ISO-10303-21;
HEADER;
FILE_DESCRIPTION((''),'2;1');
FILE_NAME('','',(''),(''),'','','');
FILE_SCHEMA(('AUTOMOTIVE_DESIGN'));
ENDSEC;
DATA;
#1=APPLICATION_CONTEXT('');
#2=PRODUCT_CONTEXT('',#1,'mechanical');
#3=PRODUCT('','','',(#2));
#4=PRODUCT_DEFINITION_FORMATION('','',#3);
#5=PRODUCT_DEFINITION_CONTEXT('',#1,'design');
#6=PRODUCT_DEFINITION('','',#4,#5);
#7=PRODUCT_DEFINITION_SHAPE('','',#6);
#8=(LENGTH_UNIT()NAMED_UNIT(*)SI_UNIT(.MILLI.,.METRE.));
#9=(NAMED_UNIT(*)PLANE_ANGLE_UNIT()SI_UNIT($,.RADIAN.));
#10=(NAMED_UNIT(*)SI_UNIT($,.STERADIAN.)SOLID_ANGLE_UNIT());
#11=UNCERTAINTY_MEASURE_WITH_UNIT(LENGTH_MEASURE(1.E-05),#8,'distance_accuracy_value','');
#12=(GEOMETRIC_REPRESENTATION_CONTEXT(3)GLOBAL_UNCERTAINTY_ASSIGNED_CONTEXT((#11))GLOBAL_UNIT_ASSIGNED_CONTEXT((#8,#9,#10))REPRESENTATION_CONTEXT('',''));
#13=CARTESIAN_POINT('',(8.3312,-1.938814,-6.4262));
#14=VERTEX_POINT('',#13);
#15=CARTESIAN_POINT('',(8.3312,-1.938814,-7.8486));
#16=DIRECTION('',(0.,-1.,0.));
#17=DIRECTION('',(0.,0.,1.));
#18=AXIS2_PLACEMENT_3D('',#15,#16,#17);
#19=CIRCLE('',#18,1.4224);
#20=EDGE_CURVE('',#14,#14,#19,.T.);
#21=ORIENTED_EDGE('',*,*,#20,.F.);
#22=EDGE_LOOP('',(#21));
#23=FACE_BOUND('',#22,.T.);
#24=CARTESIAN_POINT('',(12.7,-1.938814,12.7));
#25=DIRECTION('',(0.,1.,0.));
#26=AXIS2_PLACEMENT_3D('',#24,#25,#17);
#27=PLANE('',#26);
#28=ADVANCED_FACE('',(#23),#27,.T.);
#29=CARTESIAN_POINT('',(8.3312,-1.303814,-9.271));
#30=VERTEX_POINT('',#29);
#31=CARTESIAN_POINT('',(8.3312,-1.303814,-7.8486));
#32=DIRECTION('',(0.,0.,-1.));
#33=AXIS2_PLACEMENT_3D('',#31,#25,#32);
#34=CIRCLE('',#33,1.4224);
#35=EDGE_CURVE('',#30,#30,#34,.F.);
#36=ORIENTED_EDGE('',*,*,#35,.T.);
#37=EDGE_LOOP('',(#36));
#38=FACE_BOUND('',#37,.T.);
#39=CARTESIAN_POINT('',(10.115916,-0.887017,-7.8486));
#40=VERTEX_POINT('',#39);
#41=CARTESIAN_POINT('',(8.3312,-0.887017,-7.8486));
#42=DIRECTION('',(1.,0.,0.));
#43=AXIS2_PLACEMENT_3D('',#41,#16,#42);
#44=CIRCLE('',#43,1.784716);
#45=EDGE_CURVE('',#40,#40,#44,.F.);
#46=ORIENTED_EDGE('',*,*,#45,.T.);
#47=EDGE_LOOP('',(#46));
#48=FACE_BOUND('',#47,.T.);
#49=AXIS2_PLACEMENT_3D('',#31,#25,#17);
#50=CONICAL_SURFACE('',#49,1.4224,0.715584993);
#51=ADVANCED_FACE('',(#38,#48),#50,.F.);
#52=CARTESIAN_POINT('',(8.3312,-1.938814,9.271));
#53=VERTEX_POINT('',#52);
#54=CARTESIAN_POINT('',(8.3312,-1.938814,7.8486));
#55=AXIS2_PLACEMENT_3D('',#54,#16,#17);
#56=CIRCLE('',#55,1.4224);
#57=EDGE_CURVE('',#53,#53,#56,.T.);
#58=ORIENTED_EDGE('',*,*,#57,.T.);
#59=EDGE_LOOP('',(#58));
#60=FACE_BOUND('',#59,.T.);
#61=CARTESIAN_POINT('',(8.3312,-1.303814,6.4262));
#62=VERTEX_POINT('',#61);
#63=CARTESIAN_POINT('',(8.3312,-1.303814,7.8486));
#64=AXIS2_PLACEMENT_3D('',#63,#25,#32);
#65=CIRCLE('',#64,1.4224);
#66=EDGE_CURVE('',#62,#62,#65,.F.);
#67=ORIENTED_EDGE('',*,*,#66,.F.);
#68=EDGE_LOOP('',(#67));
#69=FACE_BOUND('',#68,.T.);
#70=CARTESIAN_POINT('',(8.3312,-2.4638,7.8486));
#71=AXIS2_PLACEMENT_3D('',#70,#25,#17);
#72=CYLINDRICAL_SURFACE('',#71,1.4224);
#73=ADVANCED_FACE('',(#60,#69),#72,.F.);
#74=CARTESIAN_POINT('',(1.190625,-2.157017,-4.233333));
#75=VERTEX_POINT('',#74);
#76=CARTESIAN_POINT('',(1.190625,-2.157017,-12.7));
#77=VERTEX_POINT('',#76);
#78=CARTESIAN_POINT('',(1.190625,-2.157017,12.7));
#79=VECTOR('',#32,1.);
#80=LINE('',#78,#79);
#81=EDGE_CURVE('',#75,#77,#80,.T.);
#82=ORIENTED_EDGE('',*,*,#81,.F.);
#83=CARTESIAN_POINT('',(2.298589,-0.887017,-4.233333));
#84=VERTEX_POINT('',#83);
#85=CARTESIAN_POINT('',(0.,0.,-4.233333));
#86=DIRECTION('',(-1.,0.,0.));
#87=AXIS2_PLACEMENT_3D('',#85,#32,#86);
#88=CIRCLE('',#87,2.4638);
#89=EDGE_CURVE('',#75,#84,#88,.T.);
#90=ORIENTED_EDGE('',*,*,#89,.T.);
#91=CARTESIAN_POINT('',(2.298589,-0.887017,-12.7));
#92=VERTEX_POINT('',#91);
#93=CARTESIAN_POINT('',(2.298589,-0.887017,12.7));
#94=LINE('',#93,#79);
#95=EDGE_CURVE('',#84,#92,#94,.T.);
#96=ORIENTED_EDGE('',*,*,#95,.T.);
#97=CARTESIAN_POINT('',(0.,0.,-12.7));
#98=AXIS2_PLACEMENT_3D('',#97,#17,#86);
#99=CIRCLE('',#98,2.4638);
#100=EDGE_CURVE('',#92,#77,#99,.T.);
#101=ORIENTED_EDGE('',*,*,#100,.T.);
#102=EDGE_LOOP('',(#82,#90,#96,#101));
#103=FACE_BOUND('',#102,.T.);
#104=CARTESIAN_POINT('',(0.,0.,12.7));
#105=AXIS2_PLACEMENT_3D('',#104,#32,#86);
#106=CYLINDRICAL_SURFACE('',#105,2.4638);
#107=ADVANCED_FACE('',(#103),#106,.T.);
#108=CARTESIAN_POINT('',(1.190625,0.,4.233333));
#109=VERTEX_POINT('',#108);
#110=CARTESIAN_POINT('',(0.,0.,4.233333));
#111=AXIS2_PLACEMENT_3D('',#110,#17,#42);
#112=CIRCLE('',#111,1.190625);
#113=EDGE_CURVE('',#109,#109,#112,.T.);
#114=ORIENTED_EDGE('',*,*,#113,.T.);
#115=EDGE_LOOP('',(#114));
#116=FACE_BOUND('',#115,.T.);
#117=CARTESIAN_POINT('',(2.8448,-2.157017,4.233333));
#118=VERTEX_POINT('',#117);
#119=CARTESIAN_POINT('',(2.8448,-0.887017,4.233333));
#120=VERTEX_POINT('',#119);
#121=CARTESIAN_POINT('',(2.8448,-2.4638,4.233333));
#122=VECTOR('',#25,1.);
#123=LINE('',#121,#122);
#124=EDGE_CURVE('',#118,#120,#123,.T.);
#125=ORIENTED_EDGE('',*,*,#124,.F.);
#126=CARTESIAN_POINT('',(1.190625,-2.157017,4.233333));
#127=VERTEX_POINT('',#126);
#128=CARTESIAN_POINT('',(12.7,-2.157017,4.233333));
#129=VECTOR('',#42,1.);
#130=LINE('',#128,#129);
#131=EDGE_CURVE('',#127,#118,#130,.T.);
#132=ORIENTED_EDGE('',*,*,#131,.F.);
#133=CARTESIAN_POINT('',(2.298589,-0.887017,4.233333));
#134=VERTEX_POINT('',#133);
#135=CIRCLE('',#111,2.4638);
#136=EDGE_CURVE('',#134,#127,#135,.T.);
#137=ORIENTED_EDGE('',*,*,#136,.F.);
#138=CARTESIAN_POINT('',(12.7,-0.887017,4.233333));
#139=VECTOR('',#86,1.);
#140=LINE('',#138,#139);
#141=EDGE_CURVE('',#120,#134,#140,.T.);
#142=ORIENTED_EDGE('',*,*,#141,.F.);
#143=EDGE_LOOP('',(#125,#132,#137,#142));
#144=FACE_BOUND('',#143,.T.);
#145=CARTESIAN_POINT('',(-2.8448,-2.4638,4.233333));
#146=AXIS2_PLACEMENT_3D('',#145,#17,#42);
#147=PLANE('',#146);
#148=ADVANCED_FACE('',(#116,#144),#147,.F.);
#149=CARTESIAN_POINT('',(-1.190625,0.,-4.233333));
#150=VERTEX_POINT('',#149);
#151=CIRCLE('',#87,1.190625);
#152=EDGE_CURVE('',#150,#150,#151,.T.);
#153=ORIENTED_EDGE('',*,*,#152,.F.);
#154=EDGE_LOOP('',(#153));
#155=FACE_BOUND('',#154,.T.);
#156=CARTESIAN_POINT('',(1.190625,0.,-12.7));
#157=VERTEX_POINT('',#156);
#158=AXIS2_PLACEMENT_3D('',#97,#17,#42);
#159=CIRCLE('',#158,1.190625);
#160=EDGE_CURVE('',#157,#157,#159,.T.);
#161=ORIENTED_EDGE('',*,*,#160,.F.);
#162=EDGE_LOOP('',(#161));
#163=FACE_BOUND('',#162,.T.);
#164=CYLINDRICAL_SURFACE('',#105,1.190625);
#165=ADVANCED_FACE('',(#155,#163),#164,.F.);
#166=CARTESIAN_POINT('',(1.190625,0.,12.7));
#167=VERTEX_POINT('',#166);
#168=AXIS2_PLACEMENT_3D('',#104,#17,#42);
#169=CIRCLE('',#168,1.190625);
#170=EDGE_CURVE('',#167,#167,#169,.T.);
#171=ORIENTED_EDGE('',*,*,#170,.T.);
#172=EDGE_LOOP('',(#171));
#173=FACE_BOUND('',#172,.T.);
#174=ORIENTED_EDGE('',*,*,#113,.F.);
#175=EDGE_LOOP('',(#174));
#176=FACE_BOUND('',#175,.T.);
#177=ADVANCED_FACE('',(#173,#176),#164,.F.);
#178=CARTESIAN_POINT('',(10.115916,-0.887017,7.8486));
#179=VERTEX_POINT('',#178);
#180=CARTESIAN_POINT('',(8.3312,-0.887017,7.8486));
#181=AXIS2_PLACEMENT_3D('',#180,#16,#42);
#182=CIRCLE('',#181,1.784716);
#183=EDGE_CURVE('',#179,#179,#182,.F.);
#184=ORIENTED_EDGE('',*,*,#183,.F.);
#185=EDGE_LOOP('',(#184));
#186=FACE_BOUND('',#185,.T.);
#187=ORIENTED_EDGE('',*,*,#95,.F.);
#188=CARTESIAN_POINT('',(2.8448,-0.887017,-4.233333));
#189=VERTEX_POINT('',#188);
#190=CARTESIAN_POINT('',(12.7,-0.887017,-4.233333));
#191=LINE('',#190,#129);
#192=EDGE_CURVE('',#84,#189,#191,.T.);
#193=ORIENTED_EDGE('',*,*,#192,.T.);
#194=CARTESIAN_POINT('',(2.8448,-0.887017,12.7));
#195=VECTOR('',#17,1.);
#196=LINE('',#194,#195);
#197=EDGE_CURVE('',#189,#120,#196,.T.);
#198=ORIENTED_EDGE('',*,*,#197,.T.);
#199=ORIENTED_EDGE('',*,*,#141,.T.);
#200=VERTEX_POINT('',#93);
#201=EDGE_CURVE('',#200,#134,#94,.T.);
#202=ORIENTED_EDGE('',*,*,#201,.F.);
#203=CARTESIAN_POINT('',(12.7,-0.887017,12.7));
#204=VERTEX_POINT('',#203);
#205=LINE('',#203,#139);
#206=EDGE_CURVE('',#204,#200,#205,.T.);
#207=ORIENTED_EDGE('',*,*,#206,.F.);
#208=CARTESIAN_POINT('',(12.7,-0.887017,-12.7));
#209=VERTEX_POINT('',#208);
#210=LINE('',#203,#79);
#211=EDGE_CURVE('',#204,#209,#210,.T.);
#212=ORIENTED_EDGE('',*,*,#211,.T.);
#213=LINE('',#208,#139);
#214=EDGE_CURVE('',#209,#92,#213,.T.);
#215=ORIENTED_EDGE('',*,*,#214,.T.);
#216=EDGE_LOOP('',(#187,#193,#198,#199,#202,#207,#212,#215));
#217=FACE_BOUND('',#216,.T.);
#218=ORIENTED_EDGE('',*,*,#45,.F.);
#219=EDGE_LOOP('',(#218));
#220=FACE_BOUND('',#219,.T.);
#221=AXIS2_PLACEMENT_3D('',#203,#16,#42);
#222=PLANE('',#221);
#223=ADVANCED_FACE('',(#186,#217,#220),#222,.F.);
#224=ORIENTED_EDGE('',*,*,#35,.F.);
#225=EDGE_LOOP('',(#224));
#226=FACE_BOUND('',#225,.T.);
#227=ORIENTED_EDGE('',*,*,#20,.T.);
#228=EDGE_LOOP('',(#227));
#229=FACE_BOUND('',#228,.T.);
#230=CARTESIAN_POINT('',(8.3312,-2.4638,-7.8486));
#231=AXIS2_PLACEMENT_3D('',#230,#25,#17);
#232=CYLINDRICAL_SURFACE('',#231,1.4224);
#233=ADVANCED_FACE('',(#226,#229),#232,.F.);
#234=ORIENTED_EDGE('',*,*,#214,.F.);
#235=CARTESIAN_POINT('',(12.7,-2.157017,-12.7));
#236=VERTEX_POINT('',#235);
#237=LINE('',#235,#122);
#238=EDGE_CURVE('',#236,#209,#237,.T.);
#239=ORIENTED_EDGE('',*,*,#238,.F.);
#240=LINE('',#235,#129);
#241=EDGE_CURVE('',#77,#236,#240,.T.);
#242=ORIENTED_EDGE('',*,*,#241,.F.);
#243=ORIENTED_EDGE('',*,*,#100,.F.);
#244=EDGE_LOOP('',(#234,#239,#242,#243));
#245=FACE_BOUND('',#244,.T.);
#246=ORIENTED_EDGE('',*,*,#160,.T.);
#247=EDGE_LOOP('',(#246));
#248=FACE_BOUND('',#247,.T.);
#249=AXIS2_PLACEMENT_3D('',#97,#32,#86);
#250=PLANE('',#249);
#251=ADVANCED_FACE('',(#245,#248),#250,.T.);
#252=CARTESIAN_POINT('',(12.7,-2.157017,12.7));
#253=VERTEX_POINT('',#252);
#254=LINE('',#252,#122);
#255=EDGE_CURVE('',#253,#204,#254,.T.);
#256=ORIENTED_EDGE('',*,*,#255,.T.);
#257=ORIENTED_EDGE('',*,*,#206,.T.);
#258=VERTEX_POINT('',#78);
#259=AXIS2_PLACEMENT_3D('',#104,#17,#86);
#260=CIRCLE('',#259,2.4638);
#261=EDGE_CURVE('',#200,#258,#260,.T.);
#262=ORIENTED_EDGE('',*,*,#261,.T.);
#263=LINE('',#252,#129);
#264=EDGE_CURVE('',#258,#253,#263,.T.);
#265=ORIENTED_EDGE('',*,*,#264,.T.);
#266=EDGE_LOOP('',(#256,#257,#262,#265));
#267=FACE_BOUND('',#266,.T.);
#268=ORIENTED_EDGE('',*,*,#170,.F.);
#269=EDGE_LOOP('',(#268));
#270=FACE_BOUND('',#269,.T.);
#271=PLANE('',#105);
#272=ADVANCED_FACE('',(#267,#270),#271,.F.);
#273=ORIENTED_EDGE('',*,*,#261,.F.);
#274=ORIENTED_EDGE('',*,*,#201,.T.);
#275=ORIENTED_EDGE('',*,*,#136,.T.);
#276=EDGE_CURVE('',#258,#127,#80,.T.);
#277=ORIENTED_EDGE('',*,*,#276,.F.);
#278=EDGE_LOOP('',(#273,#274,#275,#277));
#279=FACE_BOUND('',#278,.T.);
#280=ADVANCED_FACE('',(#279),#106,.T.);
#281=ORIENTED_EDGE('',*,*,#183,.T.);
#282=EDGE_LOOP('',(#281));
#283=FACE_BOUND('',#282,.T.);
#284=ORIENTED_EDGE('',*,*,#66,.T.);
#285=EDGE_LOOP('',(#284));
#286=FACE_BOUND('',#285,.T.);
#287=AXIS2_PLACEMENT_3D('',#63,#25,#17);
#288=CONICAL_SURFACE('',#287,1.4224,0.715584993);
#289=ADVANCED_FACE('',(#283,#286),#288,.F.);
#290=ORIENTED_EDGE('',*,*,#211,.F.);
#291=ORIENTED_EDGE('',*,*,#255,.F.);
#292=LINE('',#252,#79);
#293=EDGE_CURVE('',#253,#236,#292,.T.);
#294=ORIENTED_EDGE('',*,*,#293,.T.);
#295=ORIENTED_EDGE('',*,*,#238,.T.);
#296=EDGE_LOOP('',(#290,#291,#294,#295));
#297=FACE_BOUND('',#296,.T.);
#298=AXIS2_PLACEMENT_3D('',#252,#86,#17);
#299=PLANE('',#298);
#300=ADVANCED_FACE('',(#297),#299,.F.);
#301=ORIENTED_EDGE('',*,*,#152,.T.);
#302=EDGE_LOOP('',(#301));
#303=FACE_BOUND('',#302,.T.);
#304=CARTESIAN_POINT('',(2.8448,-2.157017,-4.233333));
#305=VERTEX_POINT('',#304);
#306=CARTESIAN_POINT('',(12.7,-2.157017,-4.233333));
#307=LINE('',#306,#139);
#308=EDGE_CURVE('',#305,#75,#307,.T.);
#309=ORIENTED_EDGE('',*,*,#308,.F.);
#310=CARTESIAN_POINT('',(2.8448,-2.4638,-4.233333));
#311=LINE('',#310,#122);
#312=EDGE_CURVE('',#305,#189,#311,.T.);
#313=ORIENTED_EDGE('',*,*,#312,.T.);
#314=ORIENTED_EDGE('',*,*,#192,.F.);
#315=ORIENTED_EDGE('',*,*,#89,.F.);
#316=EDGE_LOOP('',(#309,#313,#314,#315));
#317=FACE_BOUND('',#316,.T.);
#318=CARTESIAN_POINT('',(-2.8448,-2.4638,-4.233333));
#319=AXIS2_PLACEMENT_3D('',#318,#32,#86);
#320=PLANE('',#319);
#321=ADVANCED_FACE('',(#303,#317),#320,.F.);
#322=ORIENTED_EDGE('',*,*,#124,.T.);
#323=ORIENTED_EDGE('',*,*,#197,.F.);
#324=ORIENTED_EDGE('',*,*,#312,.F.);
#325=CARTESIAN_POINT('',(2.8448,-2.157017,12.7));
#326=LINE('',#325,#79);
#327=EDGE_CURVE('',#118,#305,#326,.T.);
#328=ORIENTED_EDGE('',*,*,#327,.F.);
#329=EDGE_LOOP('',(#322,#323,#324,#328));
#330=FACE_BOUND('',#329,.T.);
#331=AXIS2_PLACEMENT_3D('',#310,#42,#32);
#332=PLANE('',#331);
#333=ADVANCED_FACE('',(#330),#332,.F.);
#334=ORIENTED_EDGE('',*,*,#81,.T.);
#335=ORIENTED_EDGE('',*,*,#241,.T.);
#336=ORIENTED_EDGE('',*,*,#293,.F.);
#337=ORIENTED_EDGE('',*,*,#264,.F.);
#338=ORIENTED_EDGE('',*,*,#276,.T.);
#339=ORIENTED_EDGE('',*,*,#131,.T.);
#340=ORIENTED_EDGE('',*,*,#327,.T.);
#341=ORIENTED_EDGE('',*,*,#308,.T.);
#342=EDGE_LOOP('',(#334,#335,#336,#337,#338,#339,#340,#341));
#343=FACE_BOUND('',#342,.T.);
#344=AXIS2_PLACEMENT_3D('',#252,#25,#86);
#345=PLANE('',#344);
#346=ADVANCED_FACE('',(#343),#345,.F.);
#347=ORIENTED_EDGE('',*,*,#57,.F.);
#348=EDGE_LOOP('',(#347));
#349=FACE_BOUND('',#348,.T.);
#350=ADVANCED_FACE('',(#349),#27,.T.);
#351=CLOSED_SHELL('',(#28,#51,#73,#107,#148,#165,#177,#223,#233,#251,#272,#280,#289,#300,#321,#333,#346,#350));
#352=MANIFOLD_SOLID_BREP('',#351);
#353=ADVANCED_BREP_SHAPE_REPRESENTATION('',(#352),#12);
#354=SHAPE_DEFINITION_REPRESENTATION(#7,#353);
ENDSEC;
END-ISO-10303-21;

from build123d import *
from OCP.BRepFilletAPI import BRepFilletAPI_MakeChamfer

# Parameters (mm, degrees)
SKETCH1_R           = 1.190625
EXTRUDE1_DEPTH      = 12.7
SKETCH1_W           = 9.8552
SKETCH1_H           = 1.27
EXTRUDE1_2_DEPTH    = 12.7
SKETCH20_R          = 1.4224
EXTRUDE24_DEPTH     = 20.045522232
CHAMFER2_SIZE       = 0.635
CHAMFER2_SIZE2      = 0.551997079
EXTRUDE4_DEPTH      = 19.94700397
EXTRUDE4_DEPTH_BACK = 19.94700397
SKETCH8_W           = 5.6896
SKETCH8_H           = 8.466666666
SKETCH9_R           = 1.190625
EXTRUDE5_DEPTH      = 8.466666667


# Read off the part's stored shape, not the designer's step: Mirror2
with BuildPart() as part:
    # Sketch1 → Extrude1 (new, symmetric)
    with BuildSketch(Plane.XY):
        with BuildLine():
            Line((12.7, -2.157017049), (1.190625, -2.157017049))
            ThreePointArc((1.190625, -2.157017049), (-1.856577095, 1.619701185), (2.298588957, -0.887017049))
            Line((2.298588957, -0.887017049), (12.7, -0.887017049))
            Line((12.7, -0.887017049), (12.7, -2.157017049))
        make_face()
        Circle(SKETCH1_R, mode=Mode.SUBTRACT)
    extrude(amount=EXTRUDE1_DEPTH, both=True)

    # Mirror2 outline → Mirror2 (revolve, cut)
    with BuildSketch(Plane(origin=(8.3312, 0, -7.8486), x_dir=(1, 0, 0), z_dir=(0, 0, 1))):
        Polygon((1.784715731, -0.887017049), (0, -0.887017049), (0, -1.93881362), (1.4224, -1.93881362), (1.4224, -1.30381362), align=None)
    revolve(axis=Axis((8.3312, 0, -7.8486), (0, 1, 0)), mode=Mode.SUBTRACT)

    # Mirror2 2 outline → Mirror2 2 (revolve, cut)
    with BuildSketch(Plane(origin=(8.3312, 0, 7.8486), x_dir=(1, 0, 0), z_dir=(0, 0, 1))):
        Polygon((0, -0.887017049), (0, -1.93881362), (1.4224, -1.93881362), (1.4224, -1.30381362), (1.784715731, -0.887017049), align=None)
    revolve(axis=Axis((8.3312, 0, 7.8486), (0, 1, 0)), mode=Mode.SUBTRACT)

    # Sketch8 → Extrude4 (cut, two sides: drawn at the far end of the back side and taken through both)
    with BuildSketch(Plane(origin=(0, 0, 0), x_dir=(1, 0, 0), z_dir=(0, 1, 0)).offset(-EXTRUDE4_DEPTH_BACK)):
        Rectangle(SKETCH8_W, SKETCH8_H)
    extrude(amount=EXTRUDE4_DEPTH + EXTRUDE4_DEPTH_BACK, mode=Mode.SUBTRACT)


with BuildPart() as body_2:
    # Sketch1 → Extrude1 2 (new, symmetric)
    with BuildSketch(Plane.XY):
        with Locations((-7.7724, -1.30381362)):
            Rectangle(SKETCH1_W, SKETCH1_H)
    extrude(amount=EXTRUDE1_2_DEPTH, both=True)

    # Sketch20 → Extrude24 (cut, through all)
    with BuildSketch(Plane(origin=(0, -0.66881362, 0), x_dir=(1, 0, 0), z_dir=(0, 1, 0))):
        with Locations(Location((-8.3312, 7.8486, 0), (0, 0, 270))):
            Circle(SKETCH20_R)
        with Locations(Location((-8.3312, -7.8486, 0), (0, 0, 270))):
            Circle(SKETCH20_R)
    extrude(amount=-EXTRUDE24_DEPTH, mode=Mode.SUBTRACT)

    # Chamfer2: one chamfer whose edges measure the first distance from different faces: ONE call of the kernel's chamfer builder (chamfer() names one face for all edges)
    chamfer2_edges_1 = [body_2.edges().sort_by_distance(p)[0] for p in [
        (-8.3312, -0.66881362, -9.271),
    ]]
    chamfer2_side_1 = [body_2.faces().sort_by_distance(p)[0] for p in [
        (-8.3312, -1.30381362, -9.271),
    ]]
    chamfer2_edges_2 = [body_2.edges().sort_by_distance(p)[0] for p in [
        (-8.3312, -0.66881362, 6.4262),
    ]]
    chamfer2_side_2 = [body_2.faces().sort_by_distance(p)[0] for p in [
        (-8.3312, -1.30381362, 6.4262),
    ]]
    chamfer2 = BRepFilletAPI_MakeChamfer(body_2.part.solid().wrapped)
    for e in chamfer2_edges_1:
        chamfer2.Add(CHAMFER2_SIZE, CHAMFER2_SIZE2, e.wrapped, chamfer2_side_1[0].wrapped)  # the first distance lies on this face
    for e in chamfer2_edges_2:
        chamfer2.Add(CHAMFER2_SIZE, CHAMFER2_SIZE2, e.wrapped, chamfer2_side_2[0].wrapped)  # the first distance lies on this face
    add(Compound.cast(chamfer2.Shape()), mode=Mode.REPLACE)

    # Sketch9 → Extrude5 (add)
    with BuildSketch(Plane.XY.offset(-4.233333333)):
        with BuildLine():
            Line((-2.371286314, -0.66881362), (-2.8448, -0.66881362))
            Line((-2.8448, -0.66881362), (-2.8448, -1.93881362))
            Line((-2.8448, -1.93881362), (-1.520300032, -1.93881362))
            ThreePointArc((-1.520300032, -1.93881362), (2.046786768, 1.371486189), (-2.371286314, -0.66881362))
        make_face()
        with Locations(Location((0, 0, 0), (0, 0, 180))):
            Circle(SKETCH9_R, mode=Mode.SUBTRACT)
    extrude(amount=EXTRUDE5_DEPTH)


with BuildPart() as body_3:
    # Sketch6 → Revolve1 (revolve)
    with BuildSketch(Plane(origin=(0, 0, 0), x_dir=(1, 0, 0), z_dir=(0, 1, 0))):
        with BuildLine():
            Line((-2.4638, -12.7), (-2.4638, -13.2715))
            ThreePointArc((-2.4638, -13.2715), (-1.264606924, -13.698253184), (0, -13.843))
            Line((0, -13.843), (0, 13.843))
            ThreePointArc((0, 13.843), (-1.264606924, 13.698253184), (-2.4638, 13.2715))
            Line((-2.4638, 13.2715), (-2.4638, 12.7))
            Line((-2.4638, 12.7), (-1.190625, 12.7))
            Line((-1.190625, 12.7), (-1.190625, -12.7))
            Line((-1.190625, -12.7), (-2.4638, -12.7))
        make_face()
    revolve(axis=Axis((0, 0, -13.843), (0, 0, 1)))


solid = part.part
